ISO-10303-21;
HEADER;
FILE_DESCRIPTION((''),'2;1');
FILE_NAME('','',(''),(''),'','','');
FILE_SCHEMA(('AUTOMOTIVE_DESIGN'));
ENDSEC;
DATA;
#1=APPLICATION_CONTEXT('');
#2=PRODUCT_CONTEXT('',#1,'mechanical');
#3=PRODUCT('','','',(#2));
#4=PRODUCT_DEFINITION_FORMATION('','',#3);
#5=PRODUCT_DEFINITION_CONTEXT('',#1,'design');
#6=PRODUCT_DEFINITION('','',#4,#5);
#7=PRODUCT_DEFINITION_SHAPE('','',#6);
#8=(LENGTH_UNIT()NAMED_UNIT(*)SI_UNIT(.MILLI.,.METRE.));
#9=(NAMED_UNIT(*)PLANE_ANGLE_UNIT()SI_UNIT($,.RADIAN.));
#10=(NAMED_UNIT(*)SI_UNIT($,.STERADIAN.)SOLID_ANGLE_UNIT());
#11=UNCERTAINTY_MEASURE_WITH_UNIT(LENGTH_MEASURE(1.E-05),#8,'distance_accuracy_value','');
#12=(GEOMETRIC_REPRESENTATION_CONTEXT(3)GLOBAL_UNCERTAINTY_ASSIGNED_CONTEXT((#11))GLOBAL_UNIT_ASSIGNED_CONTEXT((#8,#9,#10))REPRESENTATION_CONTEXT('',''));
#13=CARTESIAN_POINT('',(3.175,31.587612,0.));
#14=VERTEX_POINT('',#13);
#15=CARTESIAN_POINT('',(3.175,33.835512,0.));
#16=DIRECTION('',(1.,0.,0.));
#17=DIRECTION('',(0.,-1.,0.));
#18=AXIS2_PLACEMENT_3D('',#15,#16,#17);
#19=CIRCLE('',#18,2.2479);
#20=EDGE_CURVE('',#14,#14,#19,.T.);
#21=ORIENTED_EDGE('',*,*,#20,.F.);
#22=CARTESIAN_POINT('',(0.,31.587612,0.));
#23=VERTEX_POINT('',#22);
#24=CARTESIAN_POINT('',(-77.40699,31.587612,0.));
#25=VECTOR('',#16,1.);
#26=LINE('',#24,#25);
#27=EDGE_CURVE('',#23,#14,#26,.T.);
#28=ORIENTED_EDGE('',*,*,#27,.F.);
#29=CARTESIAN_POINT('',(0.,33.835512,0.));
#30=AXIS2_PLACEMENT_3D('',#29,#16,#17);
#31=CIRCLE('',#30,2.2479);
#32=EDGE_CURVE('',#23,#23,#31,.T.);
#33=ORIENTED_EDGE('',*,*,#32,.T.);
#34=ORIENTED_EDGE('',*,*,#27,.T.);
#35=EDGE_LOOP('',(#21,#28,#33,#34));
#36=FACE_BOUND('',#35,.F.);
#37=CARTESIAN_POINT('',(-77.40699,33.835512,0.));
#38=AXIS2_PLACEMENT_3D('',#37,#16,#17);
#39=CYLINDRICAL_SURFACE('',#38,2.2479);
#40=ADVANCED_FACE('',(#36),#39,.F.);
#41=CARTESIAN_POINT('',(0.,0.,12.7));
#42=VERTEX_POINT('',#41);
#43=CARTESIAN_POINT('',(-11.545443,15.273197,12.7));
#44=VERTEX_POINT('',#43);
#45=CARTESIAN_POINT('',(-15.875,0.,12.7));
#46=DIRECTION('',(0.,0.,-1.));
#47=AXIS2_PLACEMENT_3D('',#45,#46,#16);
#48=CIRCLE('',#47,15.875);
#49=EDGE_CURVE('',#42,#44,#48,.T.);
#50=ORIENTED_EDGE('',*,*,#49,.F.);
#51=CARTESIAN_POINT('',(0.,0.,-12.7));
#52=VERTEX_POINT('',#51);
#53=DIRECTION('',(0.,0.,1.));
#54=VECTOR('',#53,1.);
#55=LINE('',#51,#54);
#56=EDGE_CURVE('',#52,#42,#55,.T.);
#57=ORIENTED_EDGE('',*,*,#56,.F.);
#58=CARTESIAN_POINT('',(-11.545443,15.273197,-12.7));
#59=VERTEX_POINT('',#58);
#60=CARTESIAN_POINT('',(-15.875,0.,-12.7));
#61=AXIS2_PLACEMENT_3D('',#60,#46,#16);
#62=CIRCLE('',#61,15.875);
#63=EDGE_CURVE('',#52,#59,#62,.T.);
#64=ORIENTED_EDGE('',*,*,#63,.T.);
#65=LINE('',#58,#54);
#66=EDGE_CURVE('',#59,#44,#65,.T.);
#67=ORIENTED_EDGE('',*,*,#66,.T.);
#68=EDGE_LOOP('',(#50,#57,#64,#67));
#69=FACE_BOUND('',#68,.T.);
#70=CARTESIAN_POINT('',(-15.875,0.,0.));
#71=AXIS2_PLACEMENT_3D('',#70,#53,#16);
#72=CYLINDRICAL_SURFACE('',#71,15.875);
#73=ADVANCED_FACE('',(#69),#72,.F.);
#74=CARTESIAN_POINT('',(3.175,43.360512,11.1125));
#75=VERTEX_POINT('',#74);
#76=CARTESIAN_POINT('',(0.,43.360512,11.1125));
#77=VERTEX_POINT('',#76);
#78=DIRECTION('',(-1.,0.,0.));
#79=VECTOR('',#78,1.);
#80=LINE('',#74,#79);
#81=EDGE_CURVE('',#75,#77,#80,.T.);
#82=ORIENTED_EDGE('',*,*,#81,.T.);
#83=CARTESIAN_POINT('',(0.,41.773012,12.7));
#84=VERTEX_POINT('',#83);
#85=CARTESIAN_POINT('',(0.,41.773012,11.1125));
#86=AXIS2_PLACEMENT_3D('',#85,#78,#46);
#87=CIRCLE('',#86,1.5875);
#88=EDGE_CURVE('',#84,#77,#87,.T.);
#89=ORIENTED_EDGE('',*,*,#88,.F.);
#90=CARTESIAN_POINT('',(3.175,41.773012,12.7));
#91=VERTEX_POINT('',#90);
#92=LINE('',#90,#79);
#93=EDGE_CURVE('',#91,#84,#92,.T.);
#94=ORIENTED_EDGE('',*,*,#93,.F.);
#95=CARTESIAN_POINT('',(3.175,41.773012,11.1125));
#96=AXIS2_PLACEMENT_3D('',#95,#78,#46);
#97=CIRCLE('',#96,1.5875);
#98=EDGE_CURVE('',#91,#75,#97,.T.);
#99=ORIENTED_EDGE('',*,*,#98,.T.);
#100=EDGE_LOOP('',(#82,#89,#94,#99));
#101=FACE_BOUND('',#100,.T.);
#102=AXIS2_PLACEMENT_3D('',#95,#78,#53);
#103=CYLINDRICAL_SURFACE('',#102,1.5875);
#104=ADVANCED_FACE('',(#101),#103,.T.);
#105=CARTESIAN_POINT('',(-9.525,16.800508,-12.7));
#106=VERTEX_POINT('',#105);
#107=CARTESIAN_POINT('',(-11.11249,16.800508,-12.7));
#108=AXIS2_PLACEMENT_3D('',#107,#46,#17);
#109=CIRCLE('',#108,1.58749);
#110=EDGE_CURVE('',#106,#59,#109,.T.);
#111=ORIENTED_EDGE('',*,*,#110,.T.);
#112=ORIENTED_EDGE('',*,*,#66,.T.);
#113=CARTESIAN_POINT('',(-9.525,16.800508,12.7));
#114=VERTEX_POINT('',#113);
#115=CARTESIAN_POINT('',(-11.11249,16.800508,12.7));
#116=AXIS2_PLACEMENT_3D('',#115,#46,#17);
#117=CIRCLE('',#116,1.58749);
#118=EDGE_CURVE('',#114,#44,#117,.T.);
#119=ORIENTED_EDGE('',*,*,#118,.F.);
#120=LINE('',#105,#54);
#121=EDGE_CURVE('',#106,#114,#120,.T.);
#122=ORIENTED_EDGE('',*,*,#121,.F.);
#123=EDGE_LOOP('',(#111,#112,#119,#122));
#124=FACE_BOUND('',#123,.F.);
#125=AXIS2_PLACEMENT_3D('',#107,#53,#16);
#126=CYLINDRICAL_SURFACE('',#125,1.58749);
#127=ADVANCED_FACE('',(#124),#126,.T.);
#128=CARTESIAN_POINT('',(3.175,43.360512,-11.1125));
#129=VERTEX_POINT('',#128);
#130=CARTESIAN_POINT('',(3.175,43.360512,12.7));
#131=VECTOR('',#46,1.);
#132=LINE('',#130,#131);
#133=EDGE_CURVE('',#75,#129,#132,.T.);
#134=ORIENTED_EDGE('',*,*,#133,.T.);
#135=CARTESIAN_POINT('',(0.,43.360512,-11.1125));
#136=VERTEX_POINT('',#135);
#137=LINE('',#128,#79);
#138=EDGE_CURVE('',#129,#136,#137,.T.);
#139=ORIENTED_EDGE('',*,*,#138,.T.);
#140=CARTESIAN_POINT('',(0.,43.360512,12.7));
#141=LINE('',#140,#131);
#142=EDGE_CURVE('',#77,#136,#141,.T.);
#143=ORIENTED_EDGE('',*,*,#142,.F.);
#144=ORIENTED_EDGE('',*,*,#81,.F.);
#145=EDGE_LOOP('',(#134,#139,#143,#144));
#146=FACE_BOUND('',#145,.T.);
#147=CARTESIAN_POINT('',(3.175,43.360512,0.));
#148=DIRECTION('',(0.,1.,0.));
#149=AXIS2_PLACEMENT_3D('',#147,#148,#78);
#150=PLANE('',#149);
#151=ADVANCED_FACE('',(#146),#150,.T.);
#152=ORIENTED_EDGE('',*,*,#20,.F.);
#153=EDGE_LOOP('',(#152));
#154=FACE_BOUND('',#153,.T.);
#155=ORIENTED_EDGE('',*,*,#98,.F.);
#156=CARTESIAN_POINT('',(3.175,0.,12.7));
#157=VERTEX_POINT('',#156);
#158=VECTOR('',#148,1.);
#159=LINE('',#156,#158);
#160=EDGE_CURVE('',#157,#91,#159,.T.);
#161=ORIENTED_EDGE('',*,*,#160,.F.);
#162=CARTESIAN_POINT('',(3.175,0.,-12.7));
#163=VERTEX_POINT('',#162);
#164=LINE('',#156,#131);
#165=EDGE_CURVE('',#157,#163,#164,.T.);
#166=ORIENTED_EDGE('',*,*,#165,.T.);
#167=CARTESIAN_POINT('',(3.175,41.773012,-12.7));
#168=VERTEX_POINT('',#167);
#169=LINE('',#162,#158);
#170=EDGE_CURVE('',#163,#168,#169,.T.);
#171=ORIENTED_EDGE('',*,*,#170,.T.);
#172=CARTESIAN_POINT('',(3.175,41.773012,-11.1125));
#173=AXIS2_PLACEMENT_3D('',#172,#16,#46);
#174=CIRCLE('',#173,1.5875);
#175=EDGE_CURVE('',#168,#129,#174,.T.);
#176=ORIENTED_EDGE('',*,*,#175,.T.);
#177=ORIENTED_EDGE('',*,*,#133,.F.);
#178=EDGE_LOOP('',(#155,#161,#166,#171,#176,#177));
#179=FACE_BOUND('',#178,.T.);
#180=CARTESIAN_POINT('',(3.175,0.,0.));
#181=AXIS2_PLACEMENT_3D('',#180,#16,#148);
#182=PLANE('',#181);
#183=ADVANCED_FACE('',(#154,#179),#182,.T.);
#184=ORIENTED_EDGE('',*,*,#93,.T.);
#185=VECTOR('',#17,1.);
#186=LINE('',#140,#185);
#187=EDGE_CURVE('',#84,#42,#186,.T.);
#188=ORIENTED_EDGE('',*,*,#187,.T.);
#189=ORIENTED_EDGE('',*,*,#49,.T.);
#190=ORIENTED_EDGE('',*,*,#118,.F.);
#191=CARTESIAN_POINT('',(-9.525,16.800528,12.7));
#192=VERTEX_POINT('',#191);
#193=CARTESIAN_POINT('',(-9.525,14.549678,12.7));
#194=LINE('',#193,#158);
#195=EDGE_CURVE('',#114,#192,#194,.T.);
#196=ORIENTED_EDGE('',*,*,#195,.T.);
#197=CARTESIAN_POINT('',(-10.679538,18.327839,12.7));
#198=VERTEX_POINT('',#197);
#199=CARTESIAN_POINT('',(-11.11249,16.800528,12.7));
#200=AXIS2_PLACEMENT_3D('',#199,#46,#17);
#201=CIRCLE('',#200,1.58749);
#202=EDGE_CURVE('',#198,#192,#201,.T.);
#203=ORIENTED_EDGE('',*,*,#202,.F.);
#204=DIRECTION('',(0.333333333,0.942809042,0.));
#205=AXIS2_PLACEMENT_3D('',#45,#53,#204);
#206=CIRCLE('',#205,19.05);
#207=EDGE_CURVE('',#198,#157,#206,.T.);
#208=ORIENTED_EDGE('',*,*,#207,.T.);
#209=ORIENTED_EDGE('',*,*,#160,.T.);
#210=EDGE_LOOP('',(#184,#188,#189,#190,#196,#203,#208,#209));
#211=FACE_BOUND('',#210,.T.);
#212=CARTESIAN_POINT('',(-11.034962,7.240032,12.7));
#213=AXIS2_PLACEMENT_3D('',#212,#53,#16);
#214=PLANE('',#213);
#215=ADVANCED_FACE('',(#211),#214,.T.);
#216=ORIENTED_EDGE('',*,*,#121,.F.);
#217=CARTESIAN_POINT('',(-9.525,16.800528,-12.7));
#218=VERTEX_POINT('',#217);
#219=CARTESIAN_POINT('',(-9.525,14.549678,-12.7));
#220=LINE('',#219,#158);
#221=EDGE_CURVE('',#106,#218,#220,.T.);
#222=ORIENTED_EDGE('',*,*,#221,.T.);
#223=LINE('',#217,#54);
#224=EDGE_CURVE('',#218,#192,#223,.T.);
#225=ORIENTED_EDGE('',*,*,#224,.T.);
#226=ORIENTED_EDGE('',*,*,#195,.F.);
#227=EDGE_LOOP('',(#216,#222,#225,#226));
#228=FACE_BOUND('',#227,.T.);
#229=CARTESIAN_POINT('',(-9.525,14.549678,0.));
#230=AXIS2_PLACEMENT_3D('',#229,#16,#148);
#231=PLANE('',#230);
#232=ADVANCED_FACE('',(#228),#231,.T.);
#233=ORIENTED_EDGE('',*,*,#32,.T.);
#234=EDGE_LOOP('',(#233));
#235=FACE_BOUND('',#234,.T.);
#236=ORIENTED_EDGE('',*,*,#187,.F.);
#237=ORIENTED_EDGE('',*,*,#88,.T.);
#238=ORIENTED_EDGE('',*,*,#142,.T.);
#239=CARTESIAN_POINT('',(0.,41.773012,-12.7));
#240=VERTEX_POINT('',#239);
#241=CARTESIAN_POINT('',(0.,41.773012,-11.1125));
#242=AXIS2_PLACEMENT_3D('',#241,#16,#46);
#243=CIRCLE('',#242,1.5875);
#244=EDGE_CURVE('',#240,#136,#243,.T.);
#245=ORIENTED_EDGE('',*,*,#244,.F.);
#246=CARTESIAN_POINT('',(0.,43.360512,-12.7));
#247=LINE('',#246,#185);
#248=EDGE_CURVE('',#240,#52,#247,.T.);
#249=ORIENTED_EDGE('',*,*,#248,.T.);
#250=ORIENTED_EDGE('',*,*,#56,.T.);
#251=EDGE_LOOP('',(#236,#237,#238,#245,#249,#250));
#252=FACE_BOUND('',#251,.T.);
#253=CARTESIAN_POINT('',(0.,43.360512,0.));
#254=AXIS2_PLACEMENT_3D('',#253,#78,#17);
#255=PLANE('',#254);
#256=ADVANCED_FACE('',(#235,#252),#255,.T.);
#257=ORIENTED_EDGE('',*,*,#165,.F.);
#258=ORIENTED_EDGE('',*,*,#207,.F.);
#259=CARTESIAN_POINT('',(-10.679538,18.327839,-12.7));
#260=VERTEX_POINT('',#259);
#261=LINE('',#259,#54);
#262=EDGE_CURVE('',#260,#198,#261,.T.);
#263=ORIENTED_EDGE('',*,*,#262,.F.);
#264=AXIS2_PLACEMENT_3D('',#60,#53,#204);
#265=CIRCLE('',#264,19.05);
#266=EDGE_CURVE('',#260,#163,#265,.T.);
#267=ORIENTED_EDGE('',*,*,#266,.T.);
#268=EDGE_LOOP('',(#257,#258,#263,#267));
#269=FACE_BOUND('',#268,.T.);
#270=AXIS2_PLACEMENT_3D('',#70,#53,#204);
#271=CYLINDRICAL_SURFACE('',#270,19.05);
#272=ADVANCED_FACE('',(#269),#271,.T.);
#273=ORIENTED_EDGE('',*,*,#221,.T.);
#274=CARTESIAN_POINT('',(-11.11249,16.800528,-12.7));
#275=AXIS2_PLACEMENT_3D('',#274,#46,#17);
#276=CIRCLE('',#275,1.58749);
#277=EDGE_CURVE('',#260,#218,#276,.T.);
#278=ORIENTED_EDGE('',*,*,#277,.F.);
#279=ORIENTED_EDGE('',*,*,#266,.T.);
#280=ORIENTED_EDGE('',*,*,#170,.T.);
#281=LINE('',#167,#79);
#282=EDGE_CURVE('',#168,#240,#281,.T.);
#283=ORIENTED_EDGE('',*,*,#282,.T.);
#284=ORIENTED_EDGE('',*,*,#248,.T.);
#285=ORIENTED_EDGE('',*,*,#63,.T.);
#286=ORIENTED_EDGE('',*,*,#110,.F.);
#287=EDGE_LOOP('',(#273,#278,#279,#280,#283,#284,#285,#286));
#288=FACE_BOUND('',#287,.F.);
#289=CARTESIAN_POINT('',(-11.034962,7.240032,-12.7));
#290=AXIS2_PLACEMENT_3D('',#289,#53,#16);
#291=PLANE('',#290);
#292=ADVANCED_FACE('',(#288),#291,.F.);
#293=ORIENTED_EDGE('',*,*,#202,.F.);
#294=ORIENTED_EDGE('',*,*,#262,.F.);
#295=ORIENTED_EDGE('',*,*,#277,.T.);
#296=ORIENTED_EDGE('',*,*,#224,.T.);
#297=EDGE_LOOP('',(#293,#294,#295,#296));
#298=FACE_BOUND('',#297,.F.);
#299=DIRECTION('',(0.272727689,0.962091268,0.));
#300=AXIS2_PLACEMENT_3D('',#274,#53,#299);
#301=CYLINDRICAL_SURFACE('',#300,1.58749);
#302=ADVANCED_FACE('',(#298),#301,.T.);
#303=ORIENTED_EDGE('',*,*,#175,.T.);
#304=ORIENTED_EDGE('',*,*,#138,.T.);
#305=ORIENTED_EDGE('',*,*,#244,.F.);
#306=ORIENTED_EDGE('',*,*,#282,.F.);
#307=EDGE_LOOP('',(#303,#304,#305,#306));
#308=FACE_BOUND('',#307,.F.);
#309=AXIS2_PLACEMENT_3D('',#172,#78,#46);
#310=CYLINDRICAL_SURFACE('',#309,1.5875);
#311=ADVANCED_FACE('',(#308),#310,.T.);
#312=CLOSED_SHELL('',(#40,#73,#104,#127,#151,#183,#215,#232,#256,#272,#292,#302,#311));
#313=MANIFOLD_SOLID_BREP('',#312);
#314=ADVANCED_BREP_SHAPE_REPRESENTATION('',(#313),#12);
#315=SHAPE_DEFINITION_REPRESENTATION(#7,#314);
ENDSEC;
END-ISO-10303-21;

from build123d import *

# Parameters (mm, degrees)
F1_DEPTH = 12.7
F2_R     = 1.58749
F3_R     = 1.5875
F5_D     = 4.4958


# Not quite as in the source:
# - a fillet or chamfer is up to 0.001 mm smaller than in the source, because OpenCascade refuses the exact size


with BuildPart() as f1:
    # F0 (on Top) → F1 (new body, symmetric)
    with BuildSketch(Plane.XY):
        with BuildLine():
            Line((0, 43.3605122421), (0, 0))
            ThreePointArc((0, 0), (-29.1569779212, -8.6950956004), (-9.525, 14.5496778315))
            Line((-9.525, 14.5496778315), (-9.525, 17.9605122421))
            ThreePointArc((-9.525, 17.9605122421), (-31.4292598667, -10.9985226281), (3.175, 0))
            Line((3.175, 0), (3.175, 43.3605122421))
            Line((3.175, 43.3605122421), (0, 43.3605122421))
        make_face()
    extrude(amount=F1_DEPTH, both=True)

    # F2 (radius 1.5875 in the source; OpenCascade refuses exactly that, so slightly less here)
    f2_edges = [f1.edges().sort_by_distance(p)[0] for p in [
        (-9.525, 14.549678, 0),
        (-9.525, 17.960512, 0),
    ]]
    fillet(f2_edges, radius=F2_R)

    # F3
    f3_edges = [f1.edges().sort_by_distance(p)[0] for p in [
        (1.5875, 43.360512, 12.7),
        (1.5875, 43.360512, -12.7),
    ]]
    fillet(f3_edges, radius=F3_R)

    # F5 (through all)
    with Locations(Plane(origin=(0, 0, 0), x_dir=(0, 1, 0), z_dir=(-1, 0, 0))):
        with Locations((33.8355122421, 0)):
            Hole(F5_D / 2)


solid = f1.part
